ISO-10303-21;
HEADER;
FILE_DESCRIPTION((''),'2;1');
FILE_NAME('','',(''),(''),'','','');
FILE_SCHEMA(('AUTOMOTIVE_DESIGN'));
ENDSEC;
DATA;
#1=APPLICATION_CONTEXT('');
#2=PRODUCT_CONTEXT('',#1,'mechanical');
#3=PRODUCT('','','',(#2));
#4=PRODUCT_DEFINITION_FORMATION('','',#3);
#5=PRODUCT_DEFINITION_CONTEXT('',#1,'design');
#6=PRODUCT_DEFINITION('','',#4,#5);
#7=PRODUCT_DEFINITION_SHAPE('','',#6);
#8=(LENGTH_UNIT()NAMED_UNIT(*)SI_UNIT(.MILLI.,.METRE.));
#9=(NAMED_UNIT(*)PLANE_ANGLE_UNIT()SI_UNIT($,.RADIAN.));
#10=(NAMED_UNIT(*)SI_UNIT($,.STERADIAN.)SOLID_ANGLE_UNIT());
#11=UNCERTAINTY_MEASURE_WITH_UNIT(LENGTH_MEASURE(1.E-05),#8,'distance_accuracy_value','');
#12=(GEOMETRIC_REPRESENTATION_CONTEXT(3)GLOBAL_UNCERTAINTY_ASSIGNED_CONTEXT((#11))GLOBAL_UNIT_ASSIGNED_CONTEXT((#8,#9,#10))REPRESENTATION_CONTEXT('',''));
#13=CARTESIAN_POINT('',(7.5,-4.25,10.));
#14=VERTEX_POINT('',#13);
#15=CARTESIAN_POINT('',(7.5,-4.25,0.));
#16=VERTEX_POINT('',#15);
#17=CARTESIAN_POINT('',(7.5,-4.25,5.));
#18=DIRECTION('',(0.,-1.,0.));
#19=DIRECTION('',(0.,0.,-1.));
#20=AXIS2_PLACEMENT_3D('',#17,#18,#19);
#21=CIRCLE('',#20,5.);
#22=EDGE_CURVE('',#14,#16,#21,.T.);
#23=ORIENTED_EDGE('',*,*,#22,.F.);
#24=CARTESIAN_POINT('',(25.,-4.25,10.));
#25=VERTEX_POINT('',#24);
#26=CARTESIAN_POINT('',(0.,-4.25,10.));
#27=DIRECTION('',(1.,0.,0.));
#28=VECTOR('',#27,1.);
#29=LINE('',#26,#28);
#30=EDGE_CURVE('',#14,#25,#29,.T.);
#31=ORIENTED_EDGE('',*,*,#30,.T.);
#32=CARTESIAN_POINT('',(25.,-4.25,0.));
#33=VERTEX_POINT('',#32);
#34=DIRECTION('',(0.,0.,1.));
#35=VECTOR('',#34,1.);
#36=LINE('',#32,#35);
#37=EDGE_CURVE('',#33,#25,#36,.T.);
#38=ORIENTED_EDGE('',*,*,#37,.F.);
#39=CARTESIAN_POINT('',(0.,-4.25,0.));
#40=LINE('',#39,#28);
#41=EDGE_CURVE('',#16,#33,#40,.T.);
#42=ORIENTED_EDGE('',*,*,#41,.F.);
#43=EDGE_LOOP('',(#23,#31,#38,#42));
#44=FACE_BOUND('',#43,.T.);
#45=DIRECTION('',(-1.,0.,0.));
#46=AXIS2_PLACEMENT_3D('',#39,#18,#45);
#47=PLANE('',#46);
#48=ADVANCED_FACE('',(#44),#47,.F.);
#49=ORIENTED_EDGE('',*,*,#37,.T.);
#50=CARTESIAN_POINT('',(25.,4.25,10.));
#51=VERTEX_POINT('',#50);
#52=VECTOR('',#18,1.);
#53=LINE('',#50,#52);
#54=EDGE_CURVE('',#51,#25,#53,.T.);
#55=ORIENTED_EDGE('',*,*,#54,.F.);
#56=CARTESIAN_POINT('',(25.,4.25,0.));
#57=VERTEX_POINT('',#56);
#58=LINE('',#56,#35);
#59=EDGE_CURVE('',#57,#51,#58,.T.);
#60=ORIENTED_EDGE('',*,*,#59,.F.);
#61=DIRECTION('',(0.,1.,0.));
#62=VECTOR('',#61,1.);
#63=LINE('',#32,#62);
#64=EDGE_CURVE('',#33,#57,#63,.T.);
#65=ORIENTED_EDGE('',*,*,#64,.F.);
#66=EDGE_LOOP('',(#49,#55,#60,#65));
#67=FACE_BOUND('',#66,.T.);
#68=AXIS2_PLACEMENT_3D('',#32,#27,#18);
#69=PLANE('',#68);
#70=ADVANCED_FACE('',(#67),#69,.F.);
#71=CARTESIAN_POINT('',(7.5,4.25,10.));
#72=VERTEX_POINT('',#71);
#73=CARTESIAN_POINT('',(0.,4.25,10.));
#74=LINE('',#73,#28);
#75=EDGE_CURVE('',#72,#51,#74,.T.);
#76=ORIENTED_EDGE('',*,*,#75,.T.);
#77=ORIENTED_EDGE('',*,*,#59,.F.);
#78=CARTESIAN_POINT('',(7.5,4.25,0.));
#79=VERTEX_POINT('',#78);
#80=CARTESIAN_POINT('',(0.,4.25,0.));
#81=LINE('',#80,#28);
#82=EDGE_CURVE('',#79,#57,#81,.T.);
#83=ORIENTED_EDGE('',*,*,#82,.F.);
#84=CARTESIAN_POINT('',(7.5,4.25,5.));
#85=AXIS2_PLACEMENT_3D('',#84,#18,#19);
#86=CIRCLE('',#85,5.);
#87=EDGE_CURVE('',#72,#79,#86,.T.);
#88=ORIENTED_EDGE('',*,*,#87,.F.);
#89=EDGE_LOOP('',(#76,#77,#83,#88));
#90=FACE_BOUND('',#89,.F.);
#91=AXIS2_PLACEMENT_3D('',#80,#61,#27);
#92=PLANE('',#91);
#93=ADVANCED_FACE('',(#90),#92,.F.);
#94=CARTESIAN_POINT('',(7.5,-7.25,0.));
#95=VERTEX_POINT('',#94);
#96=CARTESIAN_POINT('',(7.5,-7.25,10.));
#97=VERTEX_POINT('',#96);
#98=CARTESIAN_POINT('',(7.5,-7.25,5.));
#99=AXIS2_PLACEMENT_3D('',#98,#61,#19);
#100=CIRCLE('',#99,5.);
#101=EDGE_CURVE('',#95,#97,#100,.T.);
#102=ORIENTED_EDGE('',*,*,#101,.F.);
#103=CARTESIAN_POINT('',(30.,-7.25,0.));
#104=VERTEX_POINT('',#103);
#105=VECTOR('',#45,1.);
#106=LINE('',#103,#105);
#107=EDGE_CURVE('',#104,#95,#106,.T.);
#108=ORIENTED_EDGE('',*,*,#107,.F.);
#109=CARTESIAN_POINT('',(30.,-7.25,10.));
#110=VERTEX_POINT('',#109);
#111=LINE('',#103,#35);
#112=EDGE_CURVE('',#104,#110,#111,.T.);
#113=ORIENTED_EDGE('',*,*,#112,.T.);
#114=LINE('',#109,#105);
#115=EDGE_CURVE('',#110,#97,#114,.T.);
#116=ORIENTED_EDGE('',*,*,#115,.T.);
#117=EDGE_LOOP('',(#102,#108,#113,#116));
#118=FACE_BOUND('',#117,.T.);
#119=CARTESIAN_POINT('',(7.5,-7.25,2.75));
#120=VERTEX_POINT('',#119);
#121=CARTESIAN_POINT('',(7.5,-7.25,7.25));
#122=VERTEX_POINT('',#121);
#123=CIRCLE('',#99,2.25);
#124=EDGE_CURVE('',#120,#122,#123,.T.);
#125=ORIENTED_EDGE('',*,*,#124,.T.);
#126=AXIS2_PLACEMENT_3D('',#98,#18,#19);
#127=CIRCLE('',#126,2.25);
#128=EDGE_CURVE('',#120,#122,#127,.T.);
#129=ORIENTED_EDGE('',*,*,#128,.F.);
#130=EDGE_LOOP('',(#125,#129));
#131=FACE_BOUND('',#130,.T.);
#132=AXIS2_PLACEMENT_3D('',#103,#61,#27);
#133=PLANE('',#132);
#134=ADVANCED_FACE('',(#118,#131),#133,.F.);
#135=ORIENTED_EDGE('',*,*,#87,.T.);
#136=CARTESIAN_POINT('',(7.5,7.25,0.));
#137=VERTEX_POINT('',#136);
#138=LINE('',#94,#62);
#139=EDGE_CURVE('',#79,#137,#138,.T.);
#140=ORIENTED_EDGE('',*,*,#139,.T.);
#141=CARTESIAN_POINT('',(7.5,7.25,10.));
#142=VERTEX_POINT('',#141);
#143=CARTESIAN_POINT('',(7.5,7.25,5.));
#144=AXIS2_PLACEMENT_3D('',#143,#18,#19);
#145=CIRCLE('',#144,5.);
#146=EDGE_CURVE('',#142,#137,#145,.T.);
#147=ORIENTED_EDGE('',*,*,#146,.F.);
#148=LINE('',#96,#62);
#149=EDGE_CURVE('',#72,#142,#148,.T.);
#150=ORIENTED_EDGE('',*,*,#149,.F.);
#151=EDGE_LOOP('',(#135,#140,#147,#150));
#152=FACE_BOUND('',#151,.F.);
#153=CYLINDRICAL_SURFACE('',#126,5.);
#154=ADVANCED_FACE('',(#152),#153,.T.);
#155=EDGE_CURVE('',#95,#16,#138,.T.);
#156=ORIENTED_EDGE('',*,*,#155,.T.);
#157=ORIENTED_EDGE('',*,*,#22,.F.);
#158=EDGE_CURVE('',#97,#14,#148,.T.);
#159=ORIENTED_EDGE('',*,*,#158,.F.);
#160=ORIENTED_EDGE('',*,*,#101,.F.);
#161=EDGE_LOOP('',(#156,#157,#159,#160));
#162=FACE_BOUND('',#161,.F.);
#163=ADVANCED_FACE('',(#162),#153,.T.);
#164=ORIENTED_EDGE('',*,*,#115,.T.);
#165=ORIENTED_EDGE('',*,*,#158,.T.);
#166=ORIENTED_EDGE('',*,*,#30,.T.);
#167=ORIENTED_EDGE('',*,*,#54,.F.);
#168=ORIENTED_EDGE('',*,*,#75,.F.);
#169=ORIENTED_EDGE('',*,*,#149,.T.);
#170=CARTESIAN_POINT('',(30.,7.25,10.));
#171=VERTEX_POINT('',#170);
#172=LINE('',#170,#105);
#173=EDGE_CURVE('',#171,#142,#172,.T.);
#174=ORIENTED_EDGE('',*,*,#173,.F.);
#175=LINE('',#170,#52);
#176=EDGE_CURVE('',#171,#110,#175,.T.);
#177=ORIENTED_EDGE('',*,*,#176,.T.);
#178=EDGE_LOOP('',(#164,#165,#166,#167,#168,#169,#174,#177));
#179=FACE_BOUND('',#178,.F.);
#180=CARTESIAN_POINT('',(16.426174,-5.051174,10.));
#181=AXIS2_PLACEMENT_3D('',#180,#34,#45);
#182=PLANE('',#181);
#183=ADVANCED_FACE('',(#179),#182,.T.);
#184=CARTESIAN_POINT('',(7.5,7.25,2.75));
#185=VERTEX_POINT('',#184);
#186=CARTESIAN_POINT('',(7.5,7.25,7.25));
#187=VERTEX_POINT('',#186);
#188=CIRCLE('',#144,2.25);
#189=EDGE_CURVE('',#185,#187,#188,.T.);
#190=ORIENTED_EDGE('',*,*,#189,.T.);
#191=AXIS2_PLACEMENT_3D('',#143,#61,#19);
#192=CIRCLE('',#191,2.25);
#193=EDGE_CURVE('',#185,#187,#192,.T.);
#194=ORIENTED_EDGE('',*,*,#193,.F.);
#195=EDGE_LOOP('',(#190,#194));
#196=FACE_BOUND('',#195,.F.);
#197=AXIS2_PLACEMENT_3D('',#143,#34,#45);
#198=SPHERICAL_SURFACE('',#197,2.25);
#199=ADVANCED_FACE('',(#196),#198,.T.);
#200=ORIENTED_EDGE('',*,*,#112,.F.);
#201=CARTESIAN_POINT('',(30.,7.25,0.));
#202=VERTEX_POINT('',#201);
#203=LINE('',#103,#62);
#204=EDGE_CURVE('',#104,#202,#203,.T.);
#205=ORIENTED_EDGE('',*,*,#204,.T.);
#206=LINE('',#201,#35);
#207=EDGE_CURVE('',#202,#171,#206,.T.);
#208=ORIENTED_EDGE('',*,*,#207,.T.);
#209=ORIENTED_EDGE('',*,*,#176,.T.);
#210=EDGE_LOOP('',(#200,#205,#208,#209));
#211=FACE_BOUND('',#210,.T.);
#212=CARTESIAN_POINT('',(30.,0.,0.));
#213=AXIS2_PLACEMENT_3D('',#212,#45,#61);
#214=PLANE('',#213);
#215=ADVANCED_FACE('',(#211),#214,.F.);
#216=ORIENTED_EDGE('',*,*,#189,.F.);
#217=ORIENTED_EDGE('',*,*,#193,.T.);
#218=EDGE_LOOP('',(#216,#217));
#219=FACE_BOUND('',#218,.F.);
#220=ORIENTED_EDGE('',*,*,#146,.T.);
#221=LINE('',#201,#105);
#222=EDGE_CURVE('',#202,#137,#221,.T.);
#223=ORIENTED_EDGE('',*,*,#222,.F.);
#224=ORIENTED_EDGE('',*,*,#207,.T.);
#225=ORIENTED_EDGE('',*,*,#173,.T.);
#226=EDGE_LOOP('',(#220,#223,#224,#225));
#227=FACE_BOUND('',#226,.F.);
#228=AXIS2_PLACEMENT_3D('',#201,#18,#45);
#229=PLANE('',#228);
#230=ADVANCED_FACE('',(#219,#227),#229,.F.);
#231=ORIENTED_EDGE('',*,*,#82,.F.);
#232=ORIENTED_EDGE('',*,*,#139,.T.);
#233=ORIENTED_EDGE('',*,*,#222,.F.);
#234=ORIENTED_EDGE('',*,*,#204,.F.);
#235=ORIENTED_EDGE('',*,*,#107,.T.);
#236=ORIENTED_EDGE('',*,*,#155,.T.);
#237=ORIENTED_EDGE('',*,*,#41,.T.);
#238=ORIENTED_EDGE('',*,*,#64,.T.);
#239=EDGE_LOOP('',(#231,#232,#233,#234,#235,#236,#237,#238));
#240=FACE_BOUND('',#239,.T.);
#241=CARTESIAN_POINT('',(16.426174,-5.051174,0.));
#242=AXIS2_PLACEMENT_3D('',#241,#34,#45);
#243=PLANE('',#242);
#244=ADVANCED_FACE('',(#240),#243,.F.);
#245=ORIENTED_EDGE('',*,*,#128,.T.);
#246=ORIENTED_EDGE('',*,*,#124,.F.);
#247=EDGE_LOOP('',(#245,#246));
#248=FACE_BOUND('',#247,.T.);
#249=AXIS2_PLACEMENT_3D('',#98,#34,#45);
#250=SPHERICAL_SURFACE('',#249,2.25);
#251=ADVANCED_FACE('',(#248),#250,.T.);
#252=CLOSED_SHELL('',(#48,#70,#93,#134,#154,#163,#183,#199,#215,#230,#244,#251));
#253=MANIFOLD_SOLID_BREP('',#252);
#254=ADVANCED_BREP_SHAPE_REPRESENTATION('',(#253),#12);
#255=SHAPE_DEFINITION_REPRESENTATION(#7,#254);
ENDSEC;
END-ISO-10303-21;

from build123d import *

# Parameters (mm, degrees)
F1_DEPTH = 10
F6_DEPTH = 25


with BuildPart() as f1:
    # F0 (on Top) → F1 (new body)
    with BuildSketch(Plane.XY):
        Polygon((25, 4.25), (25, 0), (30, 0), (30, 7.25), (0, 7.25), (0, 4.25), align=None)
    extrude(amount=F1_DEPTH)

    # F2 (on face) → F3 (revolve)
    with BuildSketch(Plane(origin=(0, 7.25, 0), x_dir=(-1, 0, 0), z_dir=(0, 1, 0))):
        with BuildLine():
            Line((-7.5, 7.25), (-7.5, 2.75))
            ThreePointArc((-7.5, 2.75), (-5.25, 5), (-7.5, 7.25))
        make_face()
    revolve(axis=Axis((7.5, 7.25, 5), (0, 0, -1)))

    # F4: F1 across plane


with BuildPart() as f1_1:
    add(f1.part)
    add(f1.part.mirror(Plane.XZ))

    # F5 (on face) → F6 (cut)
    with BuildSketch(Plane.XZ.offset(7.25)):
        with BuildLine():
            ThreePointArc((7.5, 0), (2.5, 5), (7.5, 10))
            Line((7.5, 10), (0, 10))
            Line((0, 10), (0, 0))
            Line((0, 0), (7.5, 0))
        make_face()
    extrude(amount=-F6_DEPTH, mode=Mode.SUBTRACT)


solid = f1_1.part
